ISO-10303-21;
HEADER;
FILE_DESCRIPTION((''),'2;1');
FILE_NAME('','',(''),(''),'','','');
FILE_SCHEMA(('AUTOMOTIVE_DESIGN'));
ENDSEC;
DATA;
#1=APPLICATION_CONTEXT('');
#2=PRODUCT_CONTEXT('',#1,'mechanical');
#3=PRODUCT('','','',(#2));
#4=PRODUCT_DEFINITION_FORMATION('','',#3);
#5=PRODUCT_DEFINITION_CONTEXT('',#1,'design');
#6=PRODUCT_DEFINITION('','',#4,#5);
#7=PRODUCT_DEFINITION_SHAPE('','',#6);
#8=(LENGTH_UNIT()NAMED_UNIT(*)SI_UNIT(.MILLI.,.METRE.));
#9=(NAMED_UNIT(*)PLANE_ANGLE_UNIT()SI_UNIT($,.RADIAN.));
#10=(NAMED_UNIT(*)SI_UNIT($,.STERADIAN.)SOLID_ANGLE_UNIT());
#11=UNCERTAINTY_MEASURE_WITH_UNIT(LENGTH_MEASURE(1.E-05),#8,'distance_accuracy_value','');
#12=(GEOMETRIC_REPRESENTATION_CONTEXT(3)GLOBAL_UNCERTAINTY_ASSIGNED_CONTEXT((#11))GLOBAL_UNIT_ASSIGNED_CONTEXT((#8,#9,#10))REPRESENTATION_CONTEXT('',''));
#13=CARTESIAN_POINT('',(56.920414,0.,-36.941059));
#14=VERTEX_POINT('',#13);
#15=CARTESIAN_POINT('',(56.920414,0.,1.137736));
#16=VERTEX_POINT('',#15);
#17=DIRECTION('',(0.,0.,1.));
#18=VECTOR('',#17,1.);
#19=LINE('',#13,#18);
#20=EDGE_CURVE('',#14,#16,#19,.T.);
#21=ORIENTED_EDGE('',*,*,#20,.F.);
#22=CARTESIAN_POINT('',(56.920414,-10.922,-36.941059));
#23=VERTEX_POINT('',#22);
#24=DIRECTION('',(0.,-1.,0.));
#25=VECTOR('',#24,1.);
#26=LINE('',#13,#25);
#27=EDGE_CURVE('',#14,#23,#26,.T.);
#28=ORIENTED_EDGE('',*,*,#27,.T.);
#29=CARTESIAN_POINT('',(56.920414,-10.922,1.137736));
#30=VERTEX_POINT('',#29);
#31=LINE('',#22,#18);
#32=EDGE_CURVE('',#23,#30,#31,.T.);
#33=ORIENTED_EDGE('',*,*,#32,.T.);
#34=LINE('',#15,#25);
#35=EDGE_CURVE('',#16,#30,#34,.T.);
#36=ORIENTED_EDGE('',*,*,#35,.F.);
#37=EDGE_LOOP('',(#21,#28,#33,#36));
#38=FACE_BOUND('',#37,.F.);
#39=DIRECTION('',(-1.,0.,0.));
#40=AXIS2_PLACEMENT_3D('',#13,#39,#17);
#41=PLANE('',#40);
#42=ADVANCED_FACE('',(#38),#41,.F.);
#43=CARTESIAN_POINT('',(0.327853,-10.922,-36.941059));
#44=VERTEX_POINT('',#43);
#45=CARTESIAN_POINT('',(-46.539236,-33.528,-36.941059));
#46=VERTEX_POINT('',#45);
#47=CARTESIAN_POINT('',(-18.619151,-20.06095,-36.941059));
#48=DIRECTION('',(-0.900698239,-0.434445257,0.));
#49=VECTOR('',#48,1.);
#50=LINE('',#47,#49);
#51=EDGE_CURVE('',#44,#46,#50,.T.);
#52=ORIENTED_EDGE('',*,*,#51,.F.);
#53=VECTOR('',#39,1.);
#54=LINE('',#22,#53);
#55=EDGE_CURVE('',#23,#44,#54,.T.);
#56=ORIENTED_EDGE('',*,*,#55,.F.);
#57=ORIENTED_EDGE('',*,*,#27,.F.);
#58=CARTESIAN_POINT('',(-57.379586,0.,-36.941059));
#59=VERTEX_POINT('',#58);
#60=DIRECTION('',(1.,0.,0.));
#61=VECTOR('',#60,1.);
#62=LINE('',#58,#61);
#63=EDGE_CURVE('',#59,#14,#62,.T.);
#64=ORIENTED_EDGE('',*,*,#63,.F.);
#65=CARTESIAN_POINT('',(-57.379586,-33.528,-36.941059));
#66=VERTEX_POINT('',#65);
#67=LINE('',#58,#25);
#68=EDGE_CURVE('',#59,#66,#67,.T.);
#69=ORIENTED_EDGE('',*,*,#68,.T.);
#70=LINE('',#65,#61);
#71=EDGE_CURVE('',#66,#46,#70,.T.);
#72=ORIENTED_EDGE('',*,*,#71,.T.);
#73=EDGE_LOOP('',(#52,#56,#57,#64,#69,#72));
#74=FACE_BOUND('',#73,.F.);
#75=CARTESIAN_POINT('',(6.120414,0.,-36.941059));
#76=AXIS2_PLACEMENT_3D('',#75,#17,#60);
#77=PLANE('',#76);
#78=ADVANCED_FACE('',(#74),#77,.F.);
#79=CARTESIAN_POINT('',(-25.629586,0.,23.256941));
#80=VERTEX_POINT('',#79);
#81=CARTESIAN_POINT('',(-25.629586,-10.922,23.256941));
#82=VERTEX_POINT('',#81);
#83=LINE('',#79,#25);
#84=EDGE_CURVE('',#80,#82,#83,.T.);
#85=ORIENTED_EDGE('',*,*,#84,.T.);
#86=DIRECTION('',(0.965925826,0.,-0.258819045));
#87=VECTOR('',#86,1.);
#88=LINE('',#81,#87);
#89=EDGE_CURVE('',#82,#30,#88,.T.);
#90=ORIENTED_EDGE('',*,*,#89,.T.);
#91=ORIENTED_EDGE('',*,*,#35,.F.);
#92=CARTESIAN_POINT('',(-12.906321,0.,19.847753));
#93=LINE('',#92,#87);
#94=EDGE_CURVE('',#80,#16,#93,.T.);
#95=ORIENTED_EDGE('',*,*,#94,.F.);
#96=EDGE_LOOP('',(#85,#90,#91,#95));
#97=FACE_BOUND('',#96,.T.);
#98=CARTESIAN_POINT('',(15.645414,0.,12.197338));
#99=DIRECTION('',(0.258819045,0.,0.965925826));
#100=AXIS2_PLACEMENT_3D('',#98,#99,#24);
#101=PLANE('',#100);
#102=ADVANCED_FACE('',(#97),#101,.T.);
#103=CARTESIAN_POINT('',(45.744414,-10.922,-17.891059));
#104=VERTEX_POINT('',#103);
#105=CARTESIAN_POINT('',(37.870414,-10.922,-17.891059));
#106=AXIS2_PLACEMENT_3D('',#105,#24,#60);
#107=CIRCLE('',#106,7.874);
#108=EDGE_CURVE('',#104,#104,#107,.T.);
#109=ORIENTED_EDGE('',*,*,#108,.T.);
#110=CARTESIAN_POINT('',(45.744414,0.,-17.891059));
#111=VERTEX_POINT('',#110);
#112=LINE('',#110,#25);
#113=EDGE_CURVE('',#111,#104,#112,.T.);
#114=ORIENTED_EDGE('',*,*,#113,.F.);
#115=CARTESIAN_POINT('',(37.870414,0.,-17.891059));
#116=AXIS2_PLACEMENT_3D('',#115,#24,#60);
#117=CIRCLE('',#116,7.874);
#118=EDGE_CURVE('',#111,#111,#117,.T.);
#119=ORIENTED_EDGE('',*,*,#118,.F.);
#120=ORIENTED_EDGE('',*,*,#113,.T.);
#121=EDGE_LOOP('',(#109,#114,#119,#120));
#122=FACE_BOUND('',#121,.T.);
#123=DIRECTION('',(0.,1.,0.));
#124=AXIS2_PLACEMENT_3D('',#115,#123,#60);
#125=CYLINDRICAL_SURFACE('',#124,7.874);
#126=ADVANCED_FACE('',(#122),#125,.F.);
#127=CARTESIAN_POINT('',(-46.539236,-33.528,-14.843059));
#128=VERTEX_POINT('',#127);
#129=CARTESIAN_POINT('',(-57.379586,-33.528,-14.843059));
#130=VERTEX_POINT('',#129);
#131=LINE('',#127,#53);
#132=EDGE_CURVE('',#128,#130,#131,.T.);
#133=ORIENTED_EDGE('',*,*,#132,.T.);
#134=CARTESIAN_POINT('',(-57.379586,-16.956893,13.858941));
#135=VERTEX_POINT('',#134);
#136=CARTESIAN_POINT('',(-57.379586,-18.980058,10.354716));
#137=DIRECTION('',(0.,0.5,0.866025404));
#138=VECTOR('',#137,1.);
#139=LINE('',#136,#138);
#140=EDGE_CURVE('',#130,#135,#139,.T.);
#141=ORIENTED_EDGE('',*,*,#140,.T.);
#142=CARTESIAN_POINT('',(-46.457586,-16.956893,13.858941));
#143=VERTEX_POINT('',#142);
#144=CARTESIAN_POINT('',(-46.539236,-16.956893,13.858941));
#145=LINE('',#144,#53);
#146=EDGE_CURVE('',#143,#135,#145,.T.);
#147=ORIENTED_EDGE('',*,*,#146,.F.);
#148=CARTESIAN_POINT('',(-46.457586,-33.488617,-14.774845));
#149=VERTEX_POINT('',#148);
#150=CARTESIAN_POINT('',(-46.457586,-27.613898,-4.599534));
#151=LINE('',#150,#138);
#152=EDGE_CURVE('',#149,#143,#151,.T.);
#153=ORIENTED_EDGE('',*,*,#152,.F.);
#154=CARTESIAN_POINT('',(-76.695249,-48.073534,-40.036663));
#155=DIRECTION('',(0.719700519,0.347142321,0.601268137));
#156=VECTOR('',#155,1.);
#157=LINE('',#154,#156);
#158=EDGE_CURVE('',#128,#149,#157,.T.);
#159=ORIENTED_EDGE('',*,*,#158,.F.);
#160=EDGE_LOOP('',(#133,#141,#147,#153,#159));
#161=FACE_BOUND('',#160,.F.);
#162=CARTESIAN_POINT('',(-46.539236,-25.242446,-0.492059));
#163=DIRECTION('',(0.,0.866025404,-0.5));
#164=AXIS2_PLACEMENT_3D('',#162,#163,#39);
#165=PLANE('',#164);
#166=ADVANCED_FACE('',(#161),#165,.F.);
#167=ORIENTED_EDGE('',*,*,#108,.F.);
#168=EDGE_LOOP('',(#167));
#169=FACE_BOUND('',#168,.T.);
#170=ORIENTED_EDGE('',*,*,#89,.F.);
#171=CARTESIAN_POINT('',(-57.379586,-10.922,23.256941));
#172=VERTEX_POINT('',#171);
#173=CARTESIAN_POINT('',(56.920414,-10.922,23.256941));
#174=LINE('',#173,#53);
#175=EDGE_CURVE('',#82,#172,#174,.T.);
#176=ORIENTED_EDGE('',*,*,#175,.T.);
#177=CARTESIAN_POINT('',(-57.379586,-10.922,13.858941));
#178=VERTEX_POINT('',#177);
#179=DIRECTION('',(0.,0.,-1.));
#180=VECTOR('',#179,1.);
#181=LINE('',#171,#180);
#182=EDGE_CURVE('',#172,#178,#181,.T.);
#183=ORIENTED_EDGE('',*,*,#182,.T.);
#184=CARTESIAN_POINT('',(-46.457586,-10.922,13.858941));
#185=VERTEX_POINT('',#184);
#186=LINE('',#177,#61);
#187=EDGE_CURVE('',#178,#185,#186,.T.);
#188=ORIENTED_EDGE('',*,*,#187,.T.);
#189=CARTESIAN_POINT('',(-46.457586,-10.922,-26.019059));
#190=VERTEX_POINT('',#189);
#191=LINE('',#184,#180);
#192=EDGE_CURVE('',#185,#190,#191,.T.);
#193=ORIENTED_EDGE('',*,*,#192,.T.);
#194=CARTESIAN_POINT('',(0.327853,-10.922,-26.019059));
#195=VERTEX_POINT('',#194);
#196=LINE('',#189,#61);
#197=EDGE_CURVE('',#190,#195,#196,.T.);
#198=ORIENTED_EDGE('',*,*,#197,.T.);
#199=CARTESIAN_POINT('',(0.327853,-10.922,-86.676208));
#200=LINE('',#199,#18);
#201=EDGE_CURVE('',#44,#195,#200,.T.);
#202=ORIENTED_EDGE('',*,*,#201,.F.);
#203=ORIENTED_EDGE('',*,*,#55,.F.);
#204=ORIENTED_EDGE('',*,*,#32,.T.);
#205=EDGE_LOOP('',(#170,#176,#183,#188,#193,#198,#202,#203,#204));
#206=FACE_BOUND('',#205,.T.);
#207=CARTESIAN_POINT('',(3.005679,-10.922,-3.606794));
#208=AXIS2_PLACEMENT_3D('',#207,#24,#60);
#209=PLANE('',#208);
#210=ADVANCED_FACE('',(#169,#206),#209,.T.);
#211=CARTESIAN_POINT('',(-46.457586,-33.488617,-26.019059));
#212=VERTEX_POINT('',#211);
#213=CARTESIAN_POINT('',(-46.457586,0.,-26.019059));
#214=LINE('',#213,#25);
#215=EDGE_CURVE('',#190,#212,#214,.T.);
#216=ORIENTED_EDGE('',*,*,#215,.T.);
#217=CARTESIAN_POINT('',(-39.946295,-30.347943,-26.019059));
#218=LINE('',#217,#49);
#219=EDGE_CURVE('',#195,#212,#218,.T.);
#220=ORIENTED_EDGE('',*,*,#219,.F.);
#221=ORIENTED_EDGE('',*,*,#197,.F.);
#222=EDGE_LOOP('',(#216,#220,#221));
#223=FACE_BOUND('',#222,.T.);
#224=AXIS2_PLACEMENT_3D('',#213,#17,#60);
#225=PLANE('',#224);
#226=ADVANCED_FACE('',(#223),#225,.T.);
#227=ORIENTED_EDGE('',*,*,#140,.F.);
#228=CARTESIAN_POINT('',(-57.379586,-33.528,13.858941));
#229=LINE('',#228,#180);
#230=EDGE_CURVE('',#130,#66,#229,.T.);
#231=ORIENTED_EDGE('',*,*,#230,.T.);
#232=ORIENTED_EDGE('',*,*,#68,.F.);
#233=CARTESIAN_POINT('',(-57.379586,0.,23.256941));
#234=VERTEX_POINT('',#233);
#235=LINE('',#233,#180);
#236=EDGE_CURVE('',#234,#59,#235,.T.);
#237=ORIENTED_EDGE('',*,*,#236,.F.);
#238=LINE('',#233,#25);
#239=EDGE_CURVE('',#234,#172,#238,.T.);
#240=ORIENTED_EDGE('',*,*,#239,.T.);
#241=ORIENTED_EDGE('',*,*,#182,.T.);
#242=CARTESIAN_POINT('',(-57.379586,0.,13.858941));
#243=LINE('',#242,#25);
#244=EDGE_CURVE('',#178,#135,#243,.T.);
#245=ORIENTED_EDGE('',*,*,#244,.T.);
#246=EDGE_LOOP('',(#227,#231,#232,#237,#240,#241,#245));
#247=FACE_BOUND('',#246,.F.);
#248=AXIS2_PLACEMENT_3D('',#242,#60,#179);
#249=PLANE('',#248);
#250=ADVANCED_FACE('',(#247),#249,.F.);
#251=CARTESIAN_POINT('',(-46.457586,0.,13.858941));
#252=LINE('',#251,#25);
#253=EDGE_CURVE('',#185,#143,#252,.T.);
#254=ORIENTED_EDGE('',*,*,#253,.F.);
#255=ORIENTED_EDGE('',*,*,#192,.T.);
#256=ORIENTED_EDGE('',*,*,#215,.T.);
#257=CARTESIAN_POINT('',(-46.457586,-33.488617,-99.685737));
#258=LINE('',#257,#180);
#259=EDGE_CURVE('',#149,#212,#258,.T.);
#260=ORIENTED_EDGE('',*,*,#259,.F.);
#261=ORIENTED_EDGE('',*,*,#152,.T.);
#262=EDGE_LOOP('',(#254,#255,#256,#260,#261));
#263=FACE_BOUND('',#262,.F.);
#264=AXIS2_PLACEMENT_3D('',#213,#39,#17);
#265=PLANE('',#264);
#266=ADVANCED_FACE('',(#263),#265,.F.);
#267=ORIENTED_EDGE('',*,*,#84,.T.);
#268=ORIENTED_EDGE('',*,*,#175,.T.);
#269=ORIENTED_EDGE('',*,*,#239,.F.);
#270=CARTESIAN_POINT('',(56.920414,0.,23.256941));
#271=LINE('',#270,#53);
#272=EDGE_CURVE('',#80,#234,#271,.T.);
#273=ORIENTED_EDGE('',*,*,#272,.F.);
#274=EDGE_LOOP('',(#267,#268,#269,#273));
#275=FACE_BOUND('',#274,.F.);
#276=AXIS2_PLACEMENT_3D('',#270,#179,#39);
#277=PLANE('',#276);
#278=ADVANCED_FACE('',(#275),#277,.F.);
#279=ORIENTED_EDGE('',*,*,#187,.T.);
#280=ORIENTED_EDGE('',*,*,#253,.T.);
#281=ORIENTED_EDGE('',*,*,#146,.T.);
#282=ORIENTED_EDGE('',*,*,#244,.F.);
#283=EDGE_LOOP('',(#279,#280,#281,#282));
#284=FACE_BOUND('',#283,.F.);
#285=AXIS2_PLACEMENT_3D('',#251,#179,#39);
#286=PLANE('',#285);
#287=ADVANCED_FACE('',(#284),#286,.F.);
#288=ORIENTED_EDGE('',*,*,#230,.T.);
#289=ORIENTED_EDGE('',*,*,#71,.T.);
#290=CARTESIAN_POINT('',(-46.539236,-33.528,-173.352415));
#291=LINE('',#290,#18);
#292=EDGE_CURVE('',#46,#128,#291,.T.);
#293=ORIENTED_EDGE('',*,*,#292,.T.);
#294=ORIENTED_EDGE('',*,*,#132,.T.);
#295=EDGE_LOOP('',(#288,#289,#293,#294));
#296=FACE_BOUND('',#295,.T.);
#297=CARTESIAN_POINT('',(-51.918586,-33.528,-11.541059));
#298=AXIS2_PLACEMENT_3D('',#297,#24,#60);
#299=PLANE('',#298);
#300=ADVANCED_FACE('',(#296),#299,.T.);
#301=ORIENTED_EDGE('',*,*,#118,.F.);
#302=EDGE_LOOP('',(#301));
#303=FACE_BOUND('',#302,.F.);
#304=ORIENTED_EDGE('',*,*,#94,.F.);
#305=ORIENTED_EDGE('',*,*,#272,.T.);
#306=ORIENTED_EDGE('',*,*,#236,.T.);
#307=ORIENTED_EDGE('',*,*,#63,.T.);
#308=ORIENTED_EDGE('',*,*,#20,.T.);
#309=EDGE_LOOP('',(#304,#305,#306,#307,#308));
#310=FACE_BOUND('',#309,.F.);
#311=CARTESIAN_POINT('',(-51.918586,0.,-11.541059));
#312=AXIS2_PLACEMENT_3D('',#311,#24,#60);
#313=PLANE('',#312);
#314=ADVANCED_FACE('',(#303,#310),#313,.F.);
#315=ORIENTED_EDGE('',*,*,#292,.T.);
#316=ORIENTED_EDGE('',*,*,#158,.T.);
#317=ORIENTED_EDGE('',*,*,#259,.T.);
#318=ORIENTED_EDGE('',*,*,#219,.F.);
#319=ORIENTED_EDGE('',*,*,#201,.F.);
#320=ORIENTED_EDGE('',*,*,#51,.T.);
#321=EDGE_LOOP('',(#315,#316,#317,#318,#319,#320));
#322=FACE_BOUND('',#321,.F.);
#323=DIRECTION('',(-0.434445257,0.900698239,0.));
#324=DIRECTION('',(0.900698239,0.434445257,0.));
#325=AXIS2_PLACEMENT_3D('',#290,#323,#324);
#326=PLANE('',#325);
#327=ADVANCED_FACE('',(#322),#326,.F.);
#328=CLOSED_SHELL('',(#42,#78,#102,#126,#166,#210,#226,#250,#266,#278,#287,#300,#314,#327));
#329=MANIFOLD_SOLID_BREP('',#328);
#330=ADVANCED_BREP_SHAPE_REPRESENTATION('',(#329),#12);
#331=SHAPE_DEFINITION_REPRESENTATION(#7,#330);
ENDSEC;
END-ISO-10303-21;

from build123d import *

# Parameters (mm, degrees)
F0_R        = 7.874
F1_DEPTH    = 10.922
F0_W        = 52.578
F0_H        = 10.922
F2_DEPTH    = 33.528
F3_SIZE2    = 22.1192058352
F3_SIZE     = 82.55
F4_T4_DEPTH = 283.7447130195
F5_SIZE2    = 16.5711074263
F5_SIZE     = 28.702


# Not quite as in the source:
# - a fillet or chamfer that OpenCascade refuses, or shapes differently, is made with other operations: its cross-section is extruded or revolved along the edge and cut away or added


with BuildPart() as f1:
    # F0 (on Front) → F1 (new body)
    with BuildSketch(Plane.XZ):
        Polygon((56.9204140842, 23.2569413837), (-57.3795859158, 23.2569413837), (-57.3795859158, 13.8589413837), (-46.4575859158, 13.8589413837), (-46.4575859158, -26.0190586163), (6.1204140842, -26.0190586163), (6.1204140842, -36.9410586163), (56.9204140842, -36.9410586163), align=None)
        with Locations((37.8704140842, -17.8910586163)):
            Circle(F0_R, mode=Mode.SUBTRACT)
    extrude(amount=F1_DEPTH)

    # F0 (on Front) → F2 (join)
    with BuildSketch(Plane.XZ):
        Polygon((-46.4575859158, 13.8589413837), (-57.3795859158, 13.8589413837), (-57.3795859158, -36.9410586163), (-46.4575859158, -36.9410586163), (-46.4575859158, -26.0190586163), align=None)
        with Locations((-20.1685859158, -31.4800586163)):
            Rectangle(F0_W, F0_H)
    extrude(amount=F2_DEPTH)

    # F3
    f3_edges = [f1.edges().sort_by_distance(p)[0] for p in [
        (56.920414, -5.461, 23.256941),
    ]]
    f3_side = f1.faces().sort_by_distance((-0.229586, -5.461, 23.256941))[0]
    chamfer(f3_edges, length=F3_SIZE, length2=F3_SIZE2, reference=f3_side)

    # F4: chamfer of 25.4 x 52.6596501835 on 1 edges, made by hand


with BuildPart() as f4_tool2:
    # F4_s3 → F4_t4 (new body)
    with BuildSketch(Plane.XY.offset(-173.3524151261)):
        Polygon((-46.5392360993, -33.528), (6.1204140842, -8.128), (6.1204140842, -33.528), align=None)
    extrude(amount=F4_T4_DEPTH)

    split(bisect_by=Plane.XZ.offset(10.922), keep=Keep.TOP)


with BuildPart() as f1_1:
    add(f1.part)

    # F4_t1: cut F4_tool2
    add(f4_tool2.part, mode=Mode.SUBTRACT)

    # F5
    f5_edges = [f1_1.edges().sort_by_distance(p)[0] for p in [
        (-51.959411, -33.528, 13.858941),
    ]]
    f5_side = f1_1.faces().sort_by_distance((-51.959411, -33.528, -11.541059))[0]
    chamfer(f5_edges, length=F5_SIZE, length2=F5_SIZE2, reference=f5_side)


solid = f1_1.part
